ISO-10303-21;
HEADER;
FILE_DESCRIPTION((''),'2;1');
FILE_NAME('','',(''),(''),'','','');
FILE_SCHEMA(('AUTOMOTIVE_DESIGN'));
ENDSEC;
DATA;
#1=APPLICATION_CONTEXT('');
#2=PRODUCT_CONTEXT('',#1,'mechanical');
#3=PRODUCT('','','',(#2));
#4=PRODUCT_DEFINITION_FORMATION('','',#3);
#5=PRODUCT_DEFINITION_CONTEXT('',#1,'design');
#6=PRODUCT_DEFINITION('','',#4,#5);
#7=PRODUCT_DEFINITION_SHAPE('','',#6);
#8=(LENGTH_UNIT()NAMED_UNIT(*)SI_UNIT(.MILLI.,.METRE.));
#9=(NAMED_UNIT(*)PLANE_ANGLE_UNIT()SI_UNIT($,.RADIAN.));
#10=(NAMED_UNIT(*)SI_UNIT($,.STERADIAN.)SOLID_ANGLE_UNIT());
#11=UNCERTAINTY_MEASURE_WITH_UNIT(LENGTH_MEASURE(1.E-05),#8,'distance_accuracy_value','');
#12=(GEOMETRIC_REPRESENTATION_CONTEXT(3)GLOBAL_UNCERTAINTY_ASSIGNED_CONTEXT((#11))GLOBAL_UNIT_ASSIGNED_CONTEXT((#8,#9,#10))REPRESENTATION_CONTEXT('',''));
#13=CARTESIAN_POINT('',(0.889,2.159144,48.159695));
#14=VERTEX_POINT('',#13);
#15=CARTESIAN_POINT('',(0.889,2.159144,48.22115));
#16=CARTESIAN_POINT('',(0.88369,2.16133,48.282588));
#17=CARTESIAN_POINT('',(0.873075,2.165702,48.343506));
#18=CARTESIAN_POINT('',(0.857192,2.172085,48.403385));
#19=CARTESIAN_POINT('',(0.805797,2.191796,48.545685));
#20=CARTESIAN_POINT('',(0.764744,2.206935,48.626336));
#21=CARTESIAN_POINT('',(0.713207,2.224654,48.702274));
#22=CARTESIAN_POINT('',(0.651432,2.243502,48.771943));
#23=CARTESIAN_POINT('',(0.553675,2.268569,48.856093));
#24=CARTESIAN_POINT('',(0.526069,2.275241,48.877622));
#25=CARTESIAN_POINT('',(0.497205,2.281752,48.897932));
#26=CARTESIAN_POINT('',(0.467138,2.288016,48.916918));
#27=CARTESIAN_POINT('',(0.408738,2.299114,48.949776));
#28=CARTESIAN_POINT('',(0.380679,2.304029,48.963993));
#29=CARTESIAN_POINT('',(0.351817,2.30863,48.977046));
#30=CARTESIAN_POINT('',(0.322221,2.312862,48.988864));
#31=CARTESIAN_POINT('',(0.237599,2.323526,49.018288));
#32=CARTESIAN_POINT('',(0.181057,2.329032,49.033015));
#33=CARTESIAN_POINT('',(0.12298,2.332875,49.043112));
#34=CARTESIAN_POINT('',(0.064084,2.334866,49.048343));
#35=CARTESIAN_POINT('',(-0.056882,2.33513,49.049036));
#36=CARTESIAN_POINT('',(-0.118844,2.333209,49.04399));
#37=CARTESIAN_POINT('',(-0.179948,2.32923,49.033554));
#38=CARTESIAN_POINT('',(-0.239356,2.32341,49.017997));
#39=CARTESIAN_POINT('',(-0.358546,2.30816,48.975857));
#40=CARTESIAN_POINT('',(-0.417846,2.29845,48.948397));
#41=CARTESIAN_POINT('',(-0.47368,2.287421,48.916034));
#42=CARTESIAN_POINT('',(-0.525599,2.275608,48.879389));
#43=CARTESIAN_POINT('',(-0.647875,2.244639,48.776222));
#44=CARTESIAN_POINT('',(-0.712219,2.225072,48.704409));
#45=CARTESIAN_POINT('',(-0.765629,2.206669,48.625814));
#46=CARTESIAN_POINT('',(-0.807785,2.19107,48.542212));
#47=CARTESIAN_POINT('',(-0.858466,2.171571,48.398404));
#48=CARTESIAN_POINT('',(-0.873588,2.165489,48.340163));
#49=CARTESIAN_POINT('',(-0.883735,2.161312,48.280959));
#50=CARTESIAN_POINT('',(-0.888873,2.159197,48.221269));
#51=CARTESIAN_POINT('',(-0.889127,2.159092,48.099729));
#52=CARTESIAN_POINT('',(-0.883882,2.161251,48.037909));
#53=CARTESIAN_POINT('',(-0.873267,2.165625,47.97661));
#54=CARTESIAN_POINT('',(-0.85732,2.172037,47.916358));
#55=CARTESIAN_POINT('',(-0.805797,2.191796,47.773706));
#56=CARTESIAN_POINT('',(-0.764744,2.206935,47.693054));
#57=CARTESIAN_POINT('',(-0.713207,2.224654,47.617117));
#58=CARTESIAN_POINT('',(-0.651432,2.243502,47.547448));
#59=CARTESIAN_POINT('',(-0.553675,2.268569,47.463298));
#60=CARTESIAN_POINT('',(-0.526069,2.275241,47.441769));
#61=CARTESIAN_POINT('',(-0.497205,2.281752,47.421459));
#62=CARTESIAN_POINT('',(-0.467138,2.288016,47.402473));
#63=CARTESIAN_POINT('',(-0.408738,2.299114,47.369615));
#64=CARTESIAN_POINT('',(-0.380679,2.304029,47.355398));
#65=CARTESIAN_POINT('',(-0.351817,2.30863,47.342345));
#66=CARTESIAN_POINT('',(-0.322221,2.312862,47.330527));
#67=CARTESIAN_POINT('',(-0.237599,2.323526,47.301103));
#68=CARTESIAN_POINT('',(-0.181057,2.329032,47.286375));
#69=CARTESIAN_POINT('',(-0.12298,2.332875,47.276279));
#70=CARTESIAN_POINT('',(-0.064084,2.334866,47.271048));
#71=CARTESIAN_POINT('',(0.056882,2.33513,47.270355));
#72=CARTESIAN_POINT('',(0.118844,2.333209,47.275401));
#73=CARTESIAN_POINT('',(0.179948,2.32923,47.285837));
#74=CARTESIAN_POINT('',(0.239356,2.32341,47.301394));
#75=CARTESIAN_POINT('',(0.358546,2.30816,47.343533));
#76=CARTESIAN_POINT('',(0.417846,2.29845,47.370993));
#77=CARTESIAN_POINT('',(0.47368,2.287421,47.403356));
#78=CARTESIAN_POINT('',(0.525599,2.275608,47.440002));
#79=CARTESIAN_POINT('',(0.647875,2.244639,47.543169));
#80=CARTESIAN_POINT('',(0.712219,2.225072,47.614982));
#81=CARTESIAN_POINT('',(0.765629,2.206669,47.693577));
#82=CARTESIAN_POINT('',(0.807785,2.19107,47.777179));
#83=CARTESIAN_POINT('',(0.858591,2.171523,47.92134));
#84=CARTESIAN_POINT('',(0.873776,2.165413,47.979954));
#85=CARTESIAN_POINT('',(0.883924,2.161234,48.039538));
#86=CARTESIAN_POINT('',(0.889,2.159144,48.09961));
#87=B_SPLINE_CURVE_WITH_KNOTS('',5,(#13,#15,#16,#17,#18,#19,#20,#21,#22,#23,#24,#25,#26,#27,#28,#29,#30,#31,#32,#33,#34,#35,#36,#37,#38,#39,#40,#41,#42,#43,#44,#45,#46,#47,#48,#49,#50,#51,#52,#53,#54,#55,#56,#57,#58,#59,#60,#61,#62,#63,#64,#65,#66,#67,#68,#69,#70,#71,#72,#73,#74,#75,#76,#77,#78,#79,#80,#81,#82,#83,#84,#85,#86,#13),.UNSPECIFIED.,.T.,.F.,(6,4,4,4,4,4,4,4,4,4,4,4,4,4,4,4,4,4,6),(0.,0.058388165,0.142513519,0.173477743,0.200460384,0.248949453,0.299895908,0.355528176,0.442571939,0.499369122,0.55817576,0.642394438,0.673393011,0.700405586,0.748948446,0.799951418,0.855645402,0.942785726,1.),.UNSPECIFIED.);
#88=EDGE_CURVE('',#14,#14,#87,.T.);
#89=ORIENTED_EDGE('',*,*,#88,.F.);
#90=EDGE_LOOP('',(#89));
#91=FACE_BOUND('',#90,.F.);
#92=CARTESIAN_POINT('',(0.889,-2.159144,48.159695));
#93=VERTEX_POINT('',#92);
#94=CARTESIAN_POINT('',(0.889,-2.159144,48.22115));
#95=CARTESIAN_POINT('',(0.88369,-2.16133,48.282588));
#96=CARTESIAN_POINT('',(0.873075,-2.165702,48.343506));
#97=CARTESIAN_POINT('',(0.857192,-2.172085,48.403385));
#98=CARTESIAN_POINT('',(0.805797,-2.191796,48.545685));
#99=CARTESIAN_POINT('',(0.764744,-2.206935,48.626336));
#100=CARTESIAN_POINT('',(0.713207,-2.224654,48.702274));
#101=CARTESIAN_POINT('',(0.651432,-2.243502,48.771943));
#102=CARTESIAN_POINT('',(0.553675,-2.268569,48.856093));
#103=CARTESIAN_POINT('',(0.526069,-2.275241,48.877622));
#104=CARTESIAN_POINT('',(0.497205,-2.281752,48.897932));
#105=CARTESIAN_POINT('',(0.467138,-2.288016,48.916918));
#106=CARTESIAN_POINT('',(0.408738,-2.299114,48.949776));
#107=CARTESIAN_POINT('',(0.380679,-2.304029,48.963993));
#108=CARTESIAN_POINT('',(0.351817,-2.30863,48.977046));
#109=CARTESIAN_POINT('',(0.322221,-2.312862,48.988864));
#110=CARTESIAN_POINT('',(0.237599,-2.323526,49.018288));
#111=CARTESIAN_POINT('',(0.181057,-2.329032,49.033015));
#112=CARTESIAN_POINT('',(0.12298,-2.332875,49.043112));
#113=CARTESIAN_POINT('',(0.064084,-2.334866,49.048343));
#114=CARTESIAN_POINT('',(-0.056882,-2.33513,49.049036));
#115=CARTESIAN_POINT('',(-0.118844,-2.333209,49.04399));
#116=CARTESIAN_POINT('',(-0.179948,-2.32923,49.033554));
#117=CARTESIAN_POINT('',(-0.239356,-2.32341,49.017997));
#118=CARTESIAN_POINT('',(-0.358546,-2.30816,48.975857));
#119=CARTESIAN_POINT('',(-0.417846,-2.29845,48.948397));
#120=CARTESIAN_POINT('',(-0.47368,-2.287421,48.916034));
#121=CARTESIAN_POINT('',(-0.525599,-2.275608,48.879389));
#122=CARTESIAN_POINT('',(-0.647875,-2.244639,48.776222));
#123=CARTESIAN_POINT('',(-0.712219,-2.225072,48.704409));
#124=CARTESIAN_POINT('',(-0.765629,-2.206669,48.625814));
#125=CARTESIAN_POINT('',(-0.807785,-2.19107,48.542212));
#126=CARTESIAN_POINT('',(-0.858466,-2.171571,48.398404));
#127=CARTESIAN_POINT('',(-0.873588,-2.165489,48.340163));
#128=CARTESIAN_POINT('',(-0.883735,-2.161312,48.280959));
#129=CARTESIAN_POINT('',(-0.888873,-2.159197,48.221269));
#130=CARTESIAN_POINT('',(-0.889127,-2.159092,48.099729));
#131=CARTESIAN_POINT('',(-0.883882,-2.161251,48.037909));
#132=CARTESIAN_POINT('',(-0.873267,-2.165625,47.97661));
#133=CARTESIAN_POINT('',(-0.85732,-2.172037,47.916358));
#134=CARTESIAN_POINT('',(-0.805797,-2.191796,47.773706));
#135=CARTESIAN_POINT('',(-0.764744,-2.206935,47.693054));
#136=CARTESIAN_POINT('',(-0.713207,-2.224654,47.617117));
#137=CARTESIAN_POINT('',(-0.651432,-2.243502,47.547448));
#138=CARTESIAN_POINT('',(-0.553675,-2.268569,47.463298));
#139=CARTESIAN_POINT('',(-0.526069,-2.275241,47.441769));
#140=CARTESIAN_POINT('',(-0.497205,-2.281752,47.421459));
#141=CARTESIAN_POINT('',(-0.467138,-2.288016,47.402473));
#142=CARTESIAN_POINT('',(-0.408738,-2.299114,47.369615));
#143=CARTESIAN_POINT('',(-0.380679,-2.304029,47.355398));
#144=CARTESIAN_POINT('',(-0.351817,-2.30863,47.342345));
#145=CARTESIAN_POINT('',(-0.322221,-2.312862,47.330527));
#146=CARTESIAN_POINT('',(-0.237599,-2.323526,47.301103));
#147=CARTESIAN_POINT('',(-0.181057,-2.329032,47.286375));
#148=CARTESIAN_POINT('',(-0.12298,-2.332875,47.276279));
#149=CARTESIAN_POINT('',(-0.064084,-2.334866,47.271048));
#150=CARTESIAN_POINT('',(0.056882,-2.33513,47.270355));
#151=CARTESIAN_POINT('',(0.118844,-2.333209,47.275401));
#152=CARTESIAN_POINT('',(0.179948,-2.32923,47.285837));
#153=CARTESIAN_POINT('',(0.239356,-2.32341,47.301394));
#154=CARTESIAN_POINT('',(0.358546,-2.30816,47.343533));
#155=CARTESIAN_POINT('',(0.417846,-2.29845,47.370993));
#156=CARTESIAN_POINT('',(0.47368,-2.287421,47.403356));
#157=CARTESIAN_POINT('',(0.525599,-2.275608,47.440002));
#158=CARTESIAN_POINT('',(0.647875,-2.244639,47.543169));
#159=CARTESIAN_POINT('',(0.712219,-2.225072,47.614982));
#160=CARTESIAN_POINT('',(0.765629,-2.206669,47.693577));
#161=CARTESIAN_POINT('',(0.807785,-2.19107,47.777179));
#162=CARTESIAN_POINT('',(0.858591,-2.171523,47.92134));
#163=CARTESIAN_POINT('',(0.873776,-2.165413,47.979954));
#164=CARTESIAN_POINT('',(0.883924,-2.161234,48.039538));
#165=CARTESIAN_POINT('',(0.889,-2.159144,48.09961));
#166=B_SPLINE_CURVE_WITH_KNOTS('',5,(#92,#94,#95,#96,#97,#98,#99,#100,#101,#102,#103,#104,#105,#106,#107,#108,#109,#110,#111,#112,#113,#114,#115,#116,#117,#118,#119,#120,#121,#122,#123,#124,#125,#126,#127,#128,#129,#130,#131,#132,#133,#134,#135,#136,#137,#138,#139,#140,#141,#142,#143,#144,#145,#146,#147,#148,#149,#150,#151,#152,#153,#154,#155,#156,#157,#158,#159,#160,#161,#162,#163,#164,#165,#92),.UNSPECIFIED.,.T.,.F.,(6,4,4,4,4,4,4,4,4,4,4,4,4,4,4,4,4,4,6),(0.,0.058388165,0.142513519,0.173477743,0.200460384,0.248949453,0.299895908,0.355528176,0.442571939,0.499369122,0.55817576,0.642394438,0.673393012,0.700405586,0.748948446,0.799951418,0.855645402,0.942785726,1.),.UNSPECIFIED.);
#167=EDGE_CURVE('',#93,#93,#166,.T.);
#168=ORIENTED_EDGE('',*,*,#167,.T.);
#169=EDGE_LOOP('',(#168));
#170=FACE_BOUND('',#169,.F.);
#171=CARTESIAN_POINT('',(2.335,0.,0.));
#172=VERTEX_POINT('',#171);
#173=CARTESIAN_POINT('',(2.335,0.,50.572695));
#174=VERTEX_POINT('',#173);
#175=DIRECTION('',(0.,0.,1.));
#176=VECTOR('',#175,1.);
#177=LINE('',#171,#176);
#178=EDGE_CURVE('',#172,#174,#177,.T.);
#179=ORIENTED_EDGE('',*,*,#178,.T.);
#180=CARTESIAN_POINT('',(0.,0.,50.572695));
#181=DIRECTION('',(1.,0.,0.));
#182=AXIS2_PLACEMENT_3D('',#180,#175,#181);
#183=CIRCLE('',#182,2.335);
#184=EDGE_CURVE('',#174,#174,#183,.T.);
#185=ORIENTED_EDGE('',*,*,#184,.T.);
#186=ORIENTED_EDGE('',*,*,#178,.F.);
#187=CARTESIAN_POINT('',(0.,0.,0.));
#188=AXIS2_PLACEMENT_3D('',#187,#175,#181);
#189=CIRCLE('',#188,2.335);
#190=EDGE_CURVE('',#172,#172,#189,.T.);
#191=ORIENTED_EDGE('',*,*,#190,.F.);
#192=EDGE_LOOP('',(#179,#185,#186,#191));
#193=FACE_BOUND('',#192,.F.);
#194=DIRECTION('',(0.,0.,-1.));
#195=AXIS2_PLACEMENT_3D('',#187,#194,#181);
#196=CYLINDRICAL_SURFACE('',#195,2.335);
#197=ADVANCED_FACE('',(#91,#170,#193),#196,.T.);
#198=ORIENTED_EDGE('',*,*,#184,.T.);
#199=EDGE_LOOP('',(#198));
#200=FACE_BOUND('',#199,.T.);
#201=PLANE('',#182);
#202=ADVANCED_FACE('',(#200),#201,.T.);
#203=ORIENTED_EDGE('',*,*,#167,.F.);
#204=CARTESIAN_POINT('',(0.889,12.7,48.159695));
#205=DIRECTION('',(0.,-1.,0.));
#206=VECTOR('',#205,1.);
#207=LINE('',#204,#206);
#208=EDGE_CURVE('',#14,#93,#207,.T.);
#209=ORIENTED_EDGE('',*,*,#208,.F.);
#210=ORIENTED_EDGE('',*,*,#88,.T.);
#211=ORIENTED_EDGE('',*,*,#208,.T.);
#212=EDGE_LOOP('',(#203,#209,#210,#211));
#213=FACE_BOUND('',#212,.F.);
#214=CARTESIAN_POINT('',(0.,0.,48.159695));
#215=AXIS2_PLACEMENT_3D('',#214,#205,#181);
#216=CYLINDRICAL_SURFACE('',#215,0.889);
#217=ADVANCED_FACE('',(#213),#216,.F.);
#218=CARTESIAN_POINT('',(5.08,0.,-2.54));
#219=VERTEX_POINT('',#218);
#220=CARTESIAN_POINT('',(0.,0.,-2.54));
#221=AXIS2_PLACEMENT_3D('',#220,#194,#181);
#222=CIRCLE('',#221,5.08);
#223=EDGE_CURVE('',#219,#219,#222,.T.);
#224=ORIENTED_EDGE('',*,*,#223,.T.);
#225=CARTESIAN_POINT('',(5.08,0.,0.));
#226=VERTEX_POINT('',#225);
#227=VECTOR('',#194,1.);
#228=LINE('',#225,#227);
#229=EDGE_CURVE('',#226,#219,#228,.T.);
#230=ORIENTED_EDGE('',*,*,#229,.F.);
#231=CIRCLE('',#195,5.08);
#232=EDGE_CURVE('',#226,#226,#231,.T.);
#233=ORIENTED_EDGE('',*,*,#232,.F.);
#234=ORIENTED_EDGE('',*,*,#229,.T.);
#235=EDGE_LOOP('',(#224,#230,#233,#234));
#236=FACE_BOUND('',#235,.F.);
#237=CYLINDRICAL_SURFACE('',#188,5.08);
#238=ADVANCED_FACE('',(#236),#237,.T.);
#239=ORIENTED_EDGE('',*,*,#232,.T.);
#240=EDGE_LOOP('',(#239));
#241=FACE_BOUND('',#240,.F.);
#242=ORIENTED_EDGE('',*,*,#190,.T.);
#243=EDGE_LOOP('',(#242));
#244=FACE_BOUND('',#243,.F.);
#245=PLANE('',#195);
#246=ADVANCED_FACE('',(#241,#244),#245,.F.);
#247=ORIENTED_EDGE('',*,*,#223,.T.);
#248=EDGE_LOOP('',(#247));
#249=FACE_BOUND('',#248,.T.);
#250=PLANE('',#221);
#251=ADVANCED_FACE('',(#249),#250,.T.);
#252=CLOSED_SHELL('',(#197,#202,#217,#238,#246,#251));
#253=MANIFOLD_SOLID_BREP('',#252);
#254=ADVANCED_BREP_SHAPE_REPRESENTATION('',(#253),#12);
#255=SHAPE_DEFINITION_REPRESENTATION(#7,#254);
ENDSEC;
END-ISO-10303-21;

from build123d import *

# Parameters (mm, degrees)
F0_R     = 2.335
F1_DEPTH = 50.5726954
F2_R     = 5.08
F2_R_2   = 2.335
F3_DEPTH = 2.54
F4_R     = 0.889
F5_DEPTH = 12.7


with BuildPart() as f1:
    # F0 (on Top) → F1 (new body)
    with BuildSketch(Plane.XY):
        Circle(F0_R)
    extrude(amount=F1_DEPTH)

    # F2 (on face) → F3 (join)
    with BuildSketch(Plane(origin=(0, 0, 0), x_dir=(1, 0, 0), z_dir=(0, 0, -1))):
        Circle(F2_R)
        Circle(F2_R_2, mode=Mode.SUBTRACT)
        Circle(F2_R_2)
    extrude(amount=F3_DEPTH)

    # F4 (on Front) → F5 (cut, symmetric)
    with BuildSketch(Plane.XZ):
        with Locations((0, 48.1596954)):
            Circle(F4_R)
    extrude(amount=F5_DEPTH, both=True, mode=Mode.SUBTRACT)


solid = f1.part
